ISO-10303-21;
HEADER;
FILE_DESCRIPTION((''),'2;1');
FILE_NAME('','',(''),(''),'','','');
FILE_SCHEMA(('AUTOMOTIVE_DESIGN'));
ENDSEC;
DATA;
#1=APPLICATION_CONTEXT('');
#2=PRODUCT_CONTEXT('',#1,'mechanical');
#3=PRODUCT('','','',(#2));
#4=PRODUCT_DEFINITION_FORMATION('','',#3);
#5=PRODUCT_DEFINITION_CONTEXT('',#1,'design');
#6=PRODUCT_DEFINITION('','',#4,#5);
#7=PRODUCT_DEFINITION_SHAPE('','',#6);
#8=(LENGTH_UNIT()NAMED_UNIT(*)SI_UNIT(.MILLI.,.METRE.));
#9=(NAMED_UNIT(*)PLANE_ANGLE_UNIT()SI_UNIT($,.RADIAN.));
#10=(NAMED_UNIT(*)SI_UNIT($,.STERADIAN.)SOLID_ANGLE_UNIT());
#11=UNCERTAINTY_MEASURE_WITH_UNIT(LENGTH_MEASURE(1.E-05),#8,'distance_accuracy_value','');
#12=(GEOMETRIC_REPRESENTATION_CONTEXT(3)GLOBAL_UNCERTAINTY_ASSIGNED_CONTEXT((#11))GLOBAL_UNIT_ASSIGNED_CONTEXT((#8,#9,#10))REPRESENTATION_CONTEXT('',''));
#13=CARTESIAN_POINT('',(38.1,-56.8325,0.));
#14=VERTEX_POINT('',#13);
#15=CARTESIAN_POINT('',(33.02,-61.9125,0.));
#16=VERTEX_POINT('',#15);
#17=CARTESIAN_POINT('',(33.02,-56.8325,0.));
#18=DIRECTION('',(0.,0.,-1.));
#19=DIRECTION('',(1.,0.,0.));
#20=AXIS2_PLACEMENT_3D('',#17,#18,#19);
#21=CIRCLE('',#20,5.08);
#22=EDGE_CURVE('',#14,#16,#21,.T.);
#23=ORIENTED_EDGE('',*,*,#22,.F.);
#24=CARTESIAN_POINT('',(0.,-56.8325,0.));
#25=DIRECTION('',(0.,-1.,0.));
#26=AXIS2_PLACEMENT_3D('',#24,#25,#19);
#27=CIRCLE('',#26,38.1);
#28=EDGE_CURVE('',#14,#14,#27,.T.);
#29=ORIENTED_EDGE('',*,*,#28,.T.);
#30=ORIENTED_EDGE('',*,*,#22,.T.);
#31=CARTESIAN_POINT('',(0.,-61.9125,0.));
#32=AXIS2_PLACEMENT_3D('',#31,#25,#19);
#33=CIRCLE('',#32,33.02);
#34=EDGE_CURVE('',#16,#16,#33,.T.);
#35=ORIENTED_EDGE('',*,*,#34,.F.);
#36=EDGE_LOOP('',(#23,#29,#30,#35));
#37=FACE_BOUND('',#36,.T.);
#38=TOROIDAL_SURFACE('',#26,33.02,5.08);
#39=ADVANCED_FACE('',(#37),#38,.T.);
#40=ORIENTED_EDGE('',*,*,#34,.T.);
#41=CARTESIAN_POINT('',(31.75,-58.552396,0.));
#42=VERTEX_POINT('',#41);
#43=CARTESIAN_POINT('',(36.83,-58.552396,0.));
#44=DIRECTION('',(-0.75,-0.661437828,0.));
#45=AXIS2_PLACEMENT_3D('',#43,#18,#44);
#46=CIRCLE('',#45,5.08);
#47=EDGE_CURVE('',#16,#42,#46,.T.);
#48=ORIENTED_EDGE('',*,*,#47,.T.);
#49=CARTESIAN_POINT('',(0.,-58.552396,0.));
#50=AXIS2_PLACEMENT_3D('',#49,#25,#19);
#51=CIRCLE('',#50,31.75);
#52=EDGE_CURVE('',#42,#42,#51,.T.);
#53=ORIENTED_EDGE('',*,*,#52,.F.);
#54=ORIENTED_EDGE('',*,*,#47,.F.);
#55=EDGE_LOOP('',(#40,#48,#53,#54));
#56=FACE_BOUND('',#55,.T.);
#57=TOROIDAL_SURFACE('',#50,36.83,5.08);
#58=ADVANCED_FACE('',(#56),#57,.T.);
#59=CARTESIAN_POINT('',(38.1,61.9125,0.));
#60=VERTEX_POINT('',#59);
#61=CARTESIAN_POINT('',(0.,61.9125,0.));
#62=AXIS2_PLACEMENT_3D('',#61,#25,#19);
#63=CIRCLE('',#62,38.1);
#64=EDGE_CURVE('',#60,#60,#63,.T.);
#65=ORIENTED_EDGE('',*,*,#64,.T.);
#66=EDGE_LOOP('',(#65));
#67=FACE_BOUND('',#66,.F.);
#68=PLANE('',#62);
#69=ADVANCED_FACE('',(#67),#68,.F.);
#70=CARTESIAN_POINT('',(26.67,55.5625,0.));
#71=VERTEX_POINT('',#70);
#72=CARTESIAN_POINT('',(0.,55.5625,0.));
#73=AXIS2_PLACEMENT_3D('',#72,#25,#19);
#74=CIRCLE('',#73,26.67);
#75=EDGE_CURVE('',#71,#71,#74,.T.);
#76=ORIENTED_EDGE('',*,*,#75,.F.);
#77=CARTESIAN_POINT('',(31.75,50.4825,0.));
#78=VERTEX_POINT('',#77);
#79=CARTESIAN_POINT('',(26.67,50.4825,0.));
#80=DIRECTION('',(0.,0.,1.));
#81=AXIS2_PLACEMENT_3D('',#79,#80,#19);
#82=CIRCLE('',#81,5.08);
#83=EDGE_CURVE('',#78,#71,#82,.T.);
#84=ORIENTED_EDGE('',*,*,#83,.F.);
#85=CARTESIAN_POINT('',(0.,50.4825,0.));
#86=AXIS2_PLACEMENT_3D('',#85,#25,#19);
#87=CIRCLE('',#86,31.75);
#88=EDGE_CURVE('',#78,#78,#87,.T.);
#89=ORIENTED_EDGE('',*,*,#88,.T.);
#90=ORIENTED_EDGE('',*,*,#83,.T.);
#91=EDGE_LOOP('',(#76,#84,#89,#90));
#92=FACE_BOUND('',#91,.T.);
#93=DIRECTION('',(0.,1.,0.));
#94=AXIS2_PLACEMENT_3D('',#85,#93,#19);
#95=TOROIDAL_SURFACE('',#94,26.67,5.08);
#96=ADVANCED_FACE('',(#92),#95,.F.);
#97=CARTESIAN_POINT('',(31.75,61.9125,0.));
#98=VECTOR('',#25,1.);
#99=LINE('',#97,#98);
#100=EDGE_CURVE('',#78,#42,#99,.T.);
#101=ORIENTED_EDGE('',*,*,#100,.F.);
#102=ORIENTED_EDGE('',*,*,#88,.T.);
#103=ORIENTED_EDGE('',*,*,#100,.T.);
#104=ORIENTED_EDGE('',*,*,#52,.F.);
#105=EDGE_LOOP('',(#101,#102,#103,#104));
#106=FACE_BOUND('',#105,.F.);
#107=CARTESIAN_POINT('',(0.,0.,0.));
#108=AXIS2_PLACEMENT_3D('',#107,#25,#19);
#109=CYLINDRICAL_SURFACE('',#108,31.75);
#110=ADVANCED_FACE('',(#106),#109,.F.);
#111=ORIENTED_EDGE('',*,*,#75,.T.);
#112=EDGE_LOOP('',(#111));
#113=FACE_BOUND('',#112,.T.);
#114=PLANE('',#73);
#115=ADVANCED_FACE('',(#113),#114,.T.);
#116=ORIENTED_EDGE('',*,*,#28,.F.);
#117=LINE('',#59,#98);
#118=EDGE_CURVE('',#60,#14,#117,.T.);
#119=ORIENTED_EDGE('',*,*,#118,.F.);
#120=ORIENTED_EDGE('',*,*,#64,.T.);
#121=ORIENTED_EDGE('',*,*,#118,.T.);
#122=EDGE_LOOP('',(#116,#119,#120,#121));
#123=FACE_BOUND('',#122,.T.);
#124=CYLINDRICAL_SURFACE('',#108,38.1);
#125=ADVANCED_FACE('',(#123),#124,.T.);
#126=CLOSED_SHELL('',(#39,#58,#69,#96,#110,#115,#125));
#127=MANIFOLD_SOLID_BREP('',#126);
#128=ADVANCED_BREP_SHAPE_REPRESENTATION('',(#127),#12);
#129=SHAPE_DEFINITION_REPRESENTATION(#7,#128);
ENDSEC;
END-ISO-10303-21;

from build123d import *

# Parameters (mm, degrees)
F0_R     = 38.1
F1_DEPTH = 61.9125
F3_T     = -6.35


# Not quite as in the source:
# - a fillet or chamfer that OpenCascade refuses, or shapes differently, is made with other operations: its cross-section is extruded or revolved along the edge and cut away or added
# - a feature of the source that left no trace in its solid (it failed there, or was rolled back) is left out


with BuildPart() as f1:
    # F0 (on Front) → F1 (new body, symmetric)
    with BuildSketch(Plane.XZ):
        Circle(F0_R)
    extrude(amount=F1_DEPTH, both=True)

    # F3
    f3_openings = [f1.faces().sort_by_distance(p)[0] for p in [
        (0, -61.9125, 0),
    ]]
    offset(amount=F3_T, openings=f3_openings)

    # F4: fillet of radius 5.08 on 4 edges, made by hand

    # F4_s1 → F4_t2 (revolve)
    with BuildSketch(Plane.XY):
        with BuildLine():
            ThreePointArc((31.75, 50.4825), (30.2621024484, 54.0746024484), (26.67, 55.5625))
            Line((26.67, 55.5625), (31.75, 55.5625))
            Line((31.75, 55.5625), (31.75, 50.4825))
        make_face()
    revolve(axis=Axis((0, 55.5625, 0), (0, -1, 0)))

    # F4_s3 → F4_t4 (revolve, cut)
    with BuildSketch(Plane.XY):
        with BuildLine():
            ThreePointArc((38.1, -56.8325), (36.6121024484, -60.4246024484), (33.02, -61.9125))
            Line((33.02, -61.9125), (38.1, -61.9125))
            Line((38.1, -61.9125), (38.1, -56.8325))
        make_face()
    revolve(axis=Axis((0, -61.9125, 0), (0, -1, 0)), mode=Mode.SUBTRACT)

    # F4_s5 → F4_t6 (revolve, cut)
    with BuildSketch(Plane.XY):
        with BuildLine():
            ThreePointArc((33.02, -61.9125), (32.0780951188, -60.3484470592), (31.75, -58.5523958349))
            Line((31.75, -58.5523958349), (31.75, -61.9125))
            Line((31.75, -61.9125), (33.02, -61.9125))
        make_face()
    revolve(axis=Axis((0, -61.9125, 0), (0, -1, 0)), mode=Mode.SUBTRACT)


solid = f1.part
